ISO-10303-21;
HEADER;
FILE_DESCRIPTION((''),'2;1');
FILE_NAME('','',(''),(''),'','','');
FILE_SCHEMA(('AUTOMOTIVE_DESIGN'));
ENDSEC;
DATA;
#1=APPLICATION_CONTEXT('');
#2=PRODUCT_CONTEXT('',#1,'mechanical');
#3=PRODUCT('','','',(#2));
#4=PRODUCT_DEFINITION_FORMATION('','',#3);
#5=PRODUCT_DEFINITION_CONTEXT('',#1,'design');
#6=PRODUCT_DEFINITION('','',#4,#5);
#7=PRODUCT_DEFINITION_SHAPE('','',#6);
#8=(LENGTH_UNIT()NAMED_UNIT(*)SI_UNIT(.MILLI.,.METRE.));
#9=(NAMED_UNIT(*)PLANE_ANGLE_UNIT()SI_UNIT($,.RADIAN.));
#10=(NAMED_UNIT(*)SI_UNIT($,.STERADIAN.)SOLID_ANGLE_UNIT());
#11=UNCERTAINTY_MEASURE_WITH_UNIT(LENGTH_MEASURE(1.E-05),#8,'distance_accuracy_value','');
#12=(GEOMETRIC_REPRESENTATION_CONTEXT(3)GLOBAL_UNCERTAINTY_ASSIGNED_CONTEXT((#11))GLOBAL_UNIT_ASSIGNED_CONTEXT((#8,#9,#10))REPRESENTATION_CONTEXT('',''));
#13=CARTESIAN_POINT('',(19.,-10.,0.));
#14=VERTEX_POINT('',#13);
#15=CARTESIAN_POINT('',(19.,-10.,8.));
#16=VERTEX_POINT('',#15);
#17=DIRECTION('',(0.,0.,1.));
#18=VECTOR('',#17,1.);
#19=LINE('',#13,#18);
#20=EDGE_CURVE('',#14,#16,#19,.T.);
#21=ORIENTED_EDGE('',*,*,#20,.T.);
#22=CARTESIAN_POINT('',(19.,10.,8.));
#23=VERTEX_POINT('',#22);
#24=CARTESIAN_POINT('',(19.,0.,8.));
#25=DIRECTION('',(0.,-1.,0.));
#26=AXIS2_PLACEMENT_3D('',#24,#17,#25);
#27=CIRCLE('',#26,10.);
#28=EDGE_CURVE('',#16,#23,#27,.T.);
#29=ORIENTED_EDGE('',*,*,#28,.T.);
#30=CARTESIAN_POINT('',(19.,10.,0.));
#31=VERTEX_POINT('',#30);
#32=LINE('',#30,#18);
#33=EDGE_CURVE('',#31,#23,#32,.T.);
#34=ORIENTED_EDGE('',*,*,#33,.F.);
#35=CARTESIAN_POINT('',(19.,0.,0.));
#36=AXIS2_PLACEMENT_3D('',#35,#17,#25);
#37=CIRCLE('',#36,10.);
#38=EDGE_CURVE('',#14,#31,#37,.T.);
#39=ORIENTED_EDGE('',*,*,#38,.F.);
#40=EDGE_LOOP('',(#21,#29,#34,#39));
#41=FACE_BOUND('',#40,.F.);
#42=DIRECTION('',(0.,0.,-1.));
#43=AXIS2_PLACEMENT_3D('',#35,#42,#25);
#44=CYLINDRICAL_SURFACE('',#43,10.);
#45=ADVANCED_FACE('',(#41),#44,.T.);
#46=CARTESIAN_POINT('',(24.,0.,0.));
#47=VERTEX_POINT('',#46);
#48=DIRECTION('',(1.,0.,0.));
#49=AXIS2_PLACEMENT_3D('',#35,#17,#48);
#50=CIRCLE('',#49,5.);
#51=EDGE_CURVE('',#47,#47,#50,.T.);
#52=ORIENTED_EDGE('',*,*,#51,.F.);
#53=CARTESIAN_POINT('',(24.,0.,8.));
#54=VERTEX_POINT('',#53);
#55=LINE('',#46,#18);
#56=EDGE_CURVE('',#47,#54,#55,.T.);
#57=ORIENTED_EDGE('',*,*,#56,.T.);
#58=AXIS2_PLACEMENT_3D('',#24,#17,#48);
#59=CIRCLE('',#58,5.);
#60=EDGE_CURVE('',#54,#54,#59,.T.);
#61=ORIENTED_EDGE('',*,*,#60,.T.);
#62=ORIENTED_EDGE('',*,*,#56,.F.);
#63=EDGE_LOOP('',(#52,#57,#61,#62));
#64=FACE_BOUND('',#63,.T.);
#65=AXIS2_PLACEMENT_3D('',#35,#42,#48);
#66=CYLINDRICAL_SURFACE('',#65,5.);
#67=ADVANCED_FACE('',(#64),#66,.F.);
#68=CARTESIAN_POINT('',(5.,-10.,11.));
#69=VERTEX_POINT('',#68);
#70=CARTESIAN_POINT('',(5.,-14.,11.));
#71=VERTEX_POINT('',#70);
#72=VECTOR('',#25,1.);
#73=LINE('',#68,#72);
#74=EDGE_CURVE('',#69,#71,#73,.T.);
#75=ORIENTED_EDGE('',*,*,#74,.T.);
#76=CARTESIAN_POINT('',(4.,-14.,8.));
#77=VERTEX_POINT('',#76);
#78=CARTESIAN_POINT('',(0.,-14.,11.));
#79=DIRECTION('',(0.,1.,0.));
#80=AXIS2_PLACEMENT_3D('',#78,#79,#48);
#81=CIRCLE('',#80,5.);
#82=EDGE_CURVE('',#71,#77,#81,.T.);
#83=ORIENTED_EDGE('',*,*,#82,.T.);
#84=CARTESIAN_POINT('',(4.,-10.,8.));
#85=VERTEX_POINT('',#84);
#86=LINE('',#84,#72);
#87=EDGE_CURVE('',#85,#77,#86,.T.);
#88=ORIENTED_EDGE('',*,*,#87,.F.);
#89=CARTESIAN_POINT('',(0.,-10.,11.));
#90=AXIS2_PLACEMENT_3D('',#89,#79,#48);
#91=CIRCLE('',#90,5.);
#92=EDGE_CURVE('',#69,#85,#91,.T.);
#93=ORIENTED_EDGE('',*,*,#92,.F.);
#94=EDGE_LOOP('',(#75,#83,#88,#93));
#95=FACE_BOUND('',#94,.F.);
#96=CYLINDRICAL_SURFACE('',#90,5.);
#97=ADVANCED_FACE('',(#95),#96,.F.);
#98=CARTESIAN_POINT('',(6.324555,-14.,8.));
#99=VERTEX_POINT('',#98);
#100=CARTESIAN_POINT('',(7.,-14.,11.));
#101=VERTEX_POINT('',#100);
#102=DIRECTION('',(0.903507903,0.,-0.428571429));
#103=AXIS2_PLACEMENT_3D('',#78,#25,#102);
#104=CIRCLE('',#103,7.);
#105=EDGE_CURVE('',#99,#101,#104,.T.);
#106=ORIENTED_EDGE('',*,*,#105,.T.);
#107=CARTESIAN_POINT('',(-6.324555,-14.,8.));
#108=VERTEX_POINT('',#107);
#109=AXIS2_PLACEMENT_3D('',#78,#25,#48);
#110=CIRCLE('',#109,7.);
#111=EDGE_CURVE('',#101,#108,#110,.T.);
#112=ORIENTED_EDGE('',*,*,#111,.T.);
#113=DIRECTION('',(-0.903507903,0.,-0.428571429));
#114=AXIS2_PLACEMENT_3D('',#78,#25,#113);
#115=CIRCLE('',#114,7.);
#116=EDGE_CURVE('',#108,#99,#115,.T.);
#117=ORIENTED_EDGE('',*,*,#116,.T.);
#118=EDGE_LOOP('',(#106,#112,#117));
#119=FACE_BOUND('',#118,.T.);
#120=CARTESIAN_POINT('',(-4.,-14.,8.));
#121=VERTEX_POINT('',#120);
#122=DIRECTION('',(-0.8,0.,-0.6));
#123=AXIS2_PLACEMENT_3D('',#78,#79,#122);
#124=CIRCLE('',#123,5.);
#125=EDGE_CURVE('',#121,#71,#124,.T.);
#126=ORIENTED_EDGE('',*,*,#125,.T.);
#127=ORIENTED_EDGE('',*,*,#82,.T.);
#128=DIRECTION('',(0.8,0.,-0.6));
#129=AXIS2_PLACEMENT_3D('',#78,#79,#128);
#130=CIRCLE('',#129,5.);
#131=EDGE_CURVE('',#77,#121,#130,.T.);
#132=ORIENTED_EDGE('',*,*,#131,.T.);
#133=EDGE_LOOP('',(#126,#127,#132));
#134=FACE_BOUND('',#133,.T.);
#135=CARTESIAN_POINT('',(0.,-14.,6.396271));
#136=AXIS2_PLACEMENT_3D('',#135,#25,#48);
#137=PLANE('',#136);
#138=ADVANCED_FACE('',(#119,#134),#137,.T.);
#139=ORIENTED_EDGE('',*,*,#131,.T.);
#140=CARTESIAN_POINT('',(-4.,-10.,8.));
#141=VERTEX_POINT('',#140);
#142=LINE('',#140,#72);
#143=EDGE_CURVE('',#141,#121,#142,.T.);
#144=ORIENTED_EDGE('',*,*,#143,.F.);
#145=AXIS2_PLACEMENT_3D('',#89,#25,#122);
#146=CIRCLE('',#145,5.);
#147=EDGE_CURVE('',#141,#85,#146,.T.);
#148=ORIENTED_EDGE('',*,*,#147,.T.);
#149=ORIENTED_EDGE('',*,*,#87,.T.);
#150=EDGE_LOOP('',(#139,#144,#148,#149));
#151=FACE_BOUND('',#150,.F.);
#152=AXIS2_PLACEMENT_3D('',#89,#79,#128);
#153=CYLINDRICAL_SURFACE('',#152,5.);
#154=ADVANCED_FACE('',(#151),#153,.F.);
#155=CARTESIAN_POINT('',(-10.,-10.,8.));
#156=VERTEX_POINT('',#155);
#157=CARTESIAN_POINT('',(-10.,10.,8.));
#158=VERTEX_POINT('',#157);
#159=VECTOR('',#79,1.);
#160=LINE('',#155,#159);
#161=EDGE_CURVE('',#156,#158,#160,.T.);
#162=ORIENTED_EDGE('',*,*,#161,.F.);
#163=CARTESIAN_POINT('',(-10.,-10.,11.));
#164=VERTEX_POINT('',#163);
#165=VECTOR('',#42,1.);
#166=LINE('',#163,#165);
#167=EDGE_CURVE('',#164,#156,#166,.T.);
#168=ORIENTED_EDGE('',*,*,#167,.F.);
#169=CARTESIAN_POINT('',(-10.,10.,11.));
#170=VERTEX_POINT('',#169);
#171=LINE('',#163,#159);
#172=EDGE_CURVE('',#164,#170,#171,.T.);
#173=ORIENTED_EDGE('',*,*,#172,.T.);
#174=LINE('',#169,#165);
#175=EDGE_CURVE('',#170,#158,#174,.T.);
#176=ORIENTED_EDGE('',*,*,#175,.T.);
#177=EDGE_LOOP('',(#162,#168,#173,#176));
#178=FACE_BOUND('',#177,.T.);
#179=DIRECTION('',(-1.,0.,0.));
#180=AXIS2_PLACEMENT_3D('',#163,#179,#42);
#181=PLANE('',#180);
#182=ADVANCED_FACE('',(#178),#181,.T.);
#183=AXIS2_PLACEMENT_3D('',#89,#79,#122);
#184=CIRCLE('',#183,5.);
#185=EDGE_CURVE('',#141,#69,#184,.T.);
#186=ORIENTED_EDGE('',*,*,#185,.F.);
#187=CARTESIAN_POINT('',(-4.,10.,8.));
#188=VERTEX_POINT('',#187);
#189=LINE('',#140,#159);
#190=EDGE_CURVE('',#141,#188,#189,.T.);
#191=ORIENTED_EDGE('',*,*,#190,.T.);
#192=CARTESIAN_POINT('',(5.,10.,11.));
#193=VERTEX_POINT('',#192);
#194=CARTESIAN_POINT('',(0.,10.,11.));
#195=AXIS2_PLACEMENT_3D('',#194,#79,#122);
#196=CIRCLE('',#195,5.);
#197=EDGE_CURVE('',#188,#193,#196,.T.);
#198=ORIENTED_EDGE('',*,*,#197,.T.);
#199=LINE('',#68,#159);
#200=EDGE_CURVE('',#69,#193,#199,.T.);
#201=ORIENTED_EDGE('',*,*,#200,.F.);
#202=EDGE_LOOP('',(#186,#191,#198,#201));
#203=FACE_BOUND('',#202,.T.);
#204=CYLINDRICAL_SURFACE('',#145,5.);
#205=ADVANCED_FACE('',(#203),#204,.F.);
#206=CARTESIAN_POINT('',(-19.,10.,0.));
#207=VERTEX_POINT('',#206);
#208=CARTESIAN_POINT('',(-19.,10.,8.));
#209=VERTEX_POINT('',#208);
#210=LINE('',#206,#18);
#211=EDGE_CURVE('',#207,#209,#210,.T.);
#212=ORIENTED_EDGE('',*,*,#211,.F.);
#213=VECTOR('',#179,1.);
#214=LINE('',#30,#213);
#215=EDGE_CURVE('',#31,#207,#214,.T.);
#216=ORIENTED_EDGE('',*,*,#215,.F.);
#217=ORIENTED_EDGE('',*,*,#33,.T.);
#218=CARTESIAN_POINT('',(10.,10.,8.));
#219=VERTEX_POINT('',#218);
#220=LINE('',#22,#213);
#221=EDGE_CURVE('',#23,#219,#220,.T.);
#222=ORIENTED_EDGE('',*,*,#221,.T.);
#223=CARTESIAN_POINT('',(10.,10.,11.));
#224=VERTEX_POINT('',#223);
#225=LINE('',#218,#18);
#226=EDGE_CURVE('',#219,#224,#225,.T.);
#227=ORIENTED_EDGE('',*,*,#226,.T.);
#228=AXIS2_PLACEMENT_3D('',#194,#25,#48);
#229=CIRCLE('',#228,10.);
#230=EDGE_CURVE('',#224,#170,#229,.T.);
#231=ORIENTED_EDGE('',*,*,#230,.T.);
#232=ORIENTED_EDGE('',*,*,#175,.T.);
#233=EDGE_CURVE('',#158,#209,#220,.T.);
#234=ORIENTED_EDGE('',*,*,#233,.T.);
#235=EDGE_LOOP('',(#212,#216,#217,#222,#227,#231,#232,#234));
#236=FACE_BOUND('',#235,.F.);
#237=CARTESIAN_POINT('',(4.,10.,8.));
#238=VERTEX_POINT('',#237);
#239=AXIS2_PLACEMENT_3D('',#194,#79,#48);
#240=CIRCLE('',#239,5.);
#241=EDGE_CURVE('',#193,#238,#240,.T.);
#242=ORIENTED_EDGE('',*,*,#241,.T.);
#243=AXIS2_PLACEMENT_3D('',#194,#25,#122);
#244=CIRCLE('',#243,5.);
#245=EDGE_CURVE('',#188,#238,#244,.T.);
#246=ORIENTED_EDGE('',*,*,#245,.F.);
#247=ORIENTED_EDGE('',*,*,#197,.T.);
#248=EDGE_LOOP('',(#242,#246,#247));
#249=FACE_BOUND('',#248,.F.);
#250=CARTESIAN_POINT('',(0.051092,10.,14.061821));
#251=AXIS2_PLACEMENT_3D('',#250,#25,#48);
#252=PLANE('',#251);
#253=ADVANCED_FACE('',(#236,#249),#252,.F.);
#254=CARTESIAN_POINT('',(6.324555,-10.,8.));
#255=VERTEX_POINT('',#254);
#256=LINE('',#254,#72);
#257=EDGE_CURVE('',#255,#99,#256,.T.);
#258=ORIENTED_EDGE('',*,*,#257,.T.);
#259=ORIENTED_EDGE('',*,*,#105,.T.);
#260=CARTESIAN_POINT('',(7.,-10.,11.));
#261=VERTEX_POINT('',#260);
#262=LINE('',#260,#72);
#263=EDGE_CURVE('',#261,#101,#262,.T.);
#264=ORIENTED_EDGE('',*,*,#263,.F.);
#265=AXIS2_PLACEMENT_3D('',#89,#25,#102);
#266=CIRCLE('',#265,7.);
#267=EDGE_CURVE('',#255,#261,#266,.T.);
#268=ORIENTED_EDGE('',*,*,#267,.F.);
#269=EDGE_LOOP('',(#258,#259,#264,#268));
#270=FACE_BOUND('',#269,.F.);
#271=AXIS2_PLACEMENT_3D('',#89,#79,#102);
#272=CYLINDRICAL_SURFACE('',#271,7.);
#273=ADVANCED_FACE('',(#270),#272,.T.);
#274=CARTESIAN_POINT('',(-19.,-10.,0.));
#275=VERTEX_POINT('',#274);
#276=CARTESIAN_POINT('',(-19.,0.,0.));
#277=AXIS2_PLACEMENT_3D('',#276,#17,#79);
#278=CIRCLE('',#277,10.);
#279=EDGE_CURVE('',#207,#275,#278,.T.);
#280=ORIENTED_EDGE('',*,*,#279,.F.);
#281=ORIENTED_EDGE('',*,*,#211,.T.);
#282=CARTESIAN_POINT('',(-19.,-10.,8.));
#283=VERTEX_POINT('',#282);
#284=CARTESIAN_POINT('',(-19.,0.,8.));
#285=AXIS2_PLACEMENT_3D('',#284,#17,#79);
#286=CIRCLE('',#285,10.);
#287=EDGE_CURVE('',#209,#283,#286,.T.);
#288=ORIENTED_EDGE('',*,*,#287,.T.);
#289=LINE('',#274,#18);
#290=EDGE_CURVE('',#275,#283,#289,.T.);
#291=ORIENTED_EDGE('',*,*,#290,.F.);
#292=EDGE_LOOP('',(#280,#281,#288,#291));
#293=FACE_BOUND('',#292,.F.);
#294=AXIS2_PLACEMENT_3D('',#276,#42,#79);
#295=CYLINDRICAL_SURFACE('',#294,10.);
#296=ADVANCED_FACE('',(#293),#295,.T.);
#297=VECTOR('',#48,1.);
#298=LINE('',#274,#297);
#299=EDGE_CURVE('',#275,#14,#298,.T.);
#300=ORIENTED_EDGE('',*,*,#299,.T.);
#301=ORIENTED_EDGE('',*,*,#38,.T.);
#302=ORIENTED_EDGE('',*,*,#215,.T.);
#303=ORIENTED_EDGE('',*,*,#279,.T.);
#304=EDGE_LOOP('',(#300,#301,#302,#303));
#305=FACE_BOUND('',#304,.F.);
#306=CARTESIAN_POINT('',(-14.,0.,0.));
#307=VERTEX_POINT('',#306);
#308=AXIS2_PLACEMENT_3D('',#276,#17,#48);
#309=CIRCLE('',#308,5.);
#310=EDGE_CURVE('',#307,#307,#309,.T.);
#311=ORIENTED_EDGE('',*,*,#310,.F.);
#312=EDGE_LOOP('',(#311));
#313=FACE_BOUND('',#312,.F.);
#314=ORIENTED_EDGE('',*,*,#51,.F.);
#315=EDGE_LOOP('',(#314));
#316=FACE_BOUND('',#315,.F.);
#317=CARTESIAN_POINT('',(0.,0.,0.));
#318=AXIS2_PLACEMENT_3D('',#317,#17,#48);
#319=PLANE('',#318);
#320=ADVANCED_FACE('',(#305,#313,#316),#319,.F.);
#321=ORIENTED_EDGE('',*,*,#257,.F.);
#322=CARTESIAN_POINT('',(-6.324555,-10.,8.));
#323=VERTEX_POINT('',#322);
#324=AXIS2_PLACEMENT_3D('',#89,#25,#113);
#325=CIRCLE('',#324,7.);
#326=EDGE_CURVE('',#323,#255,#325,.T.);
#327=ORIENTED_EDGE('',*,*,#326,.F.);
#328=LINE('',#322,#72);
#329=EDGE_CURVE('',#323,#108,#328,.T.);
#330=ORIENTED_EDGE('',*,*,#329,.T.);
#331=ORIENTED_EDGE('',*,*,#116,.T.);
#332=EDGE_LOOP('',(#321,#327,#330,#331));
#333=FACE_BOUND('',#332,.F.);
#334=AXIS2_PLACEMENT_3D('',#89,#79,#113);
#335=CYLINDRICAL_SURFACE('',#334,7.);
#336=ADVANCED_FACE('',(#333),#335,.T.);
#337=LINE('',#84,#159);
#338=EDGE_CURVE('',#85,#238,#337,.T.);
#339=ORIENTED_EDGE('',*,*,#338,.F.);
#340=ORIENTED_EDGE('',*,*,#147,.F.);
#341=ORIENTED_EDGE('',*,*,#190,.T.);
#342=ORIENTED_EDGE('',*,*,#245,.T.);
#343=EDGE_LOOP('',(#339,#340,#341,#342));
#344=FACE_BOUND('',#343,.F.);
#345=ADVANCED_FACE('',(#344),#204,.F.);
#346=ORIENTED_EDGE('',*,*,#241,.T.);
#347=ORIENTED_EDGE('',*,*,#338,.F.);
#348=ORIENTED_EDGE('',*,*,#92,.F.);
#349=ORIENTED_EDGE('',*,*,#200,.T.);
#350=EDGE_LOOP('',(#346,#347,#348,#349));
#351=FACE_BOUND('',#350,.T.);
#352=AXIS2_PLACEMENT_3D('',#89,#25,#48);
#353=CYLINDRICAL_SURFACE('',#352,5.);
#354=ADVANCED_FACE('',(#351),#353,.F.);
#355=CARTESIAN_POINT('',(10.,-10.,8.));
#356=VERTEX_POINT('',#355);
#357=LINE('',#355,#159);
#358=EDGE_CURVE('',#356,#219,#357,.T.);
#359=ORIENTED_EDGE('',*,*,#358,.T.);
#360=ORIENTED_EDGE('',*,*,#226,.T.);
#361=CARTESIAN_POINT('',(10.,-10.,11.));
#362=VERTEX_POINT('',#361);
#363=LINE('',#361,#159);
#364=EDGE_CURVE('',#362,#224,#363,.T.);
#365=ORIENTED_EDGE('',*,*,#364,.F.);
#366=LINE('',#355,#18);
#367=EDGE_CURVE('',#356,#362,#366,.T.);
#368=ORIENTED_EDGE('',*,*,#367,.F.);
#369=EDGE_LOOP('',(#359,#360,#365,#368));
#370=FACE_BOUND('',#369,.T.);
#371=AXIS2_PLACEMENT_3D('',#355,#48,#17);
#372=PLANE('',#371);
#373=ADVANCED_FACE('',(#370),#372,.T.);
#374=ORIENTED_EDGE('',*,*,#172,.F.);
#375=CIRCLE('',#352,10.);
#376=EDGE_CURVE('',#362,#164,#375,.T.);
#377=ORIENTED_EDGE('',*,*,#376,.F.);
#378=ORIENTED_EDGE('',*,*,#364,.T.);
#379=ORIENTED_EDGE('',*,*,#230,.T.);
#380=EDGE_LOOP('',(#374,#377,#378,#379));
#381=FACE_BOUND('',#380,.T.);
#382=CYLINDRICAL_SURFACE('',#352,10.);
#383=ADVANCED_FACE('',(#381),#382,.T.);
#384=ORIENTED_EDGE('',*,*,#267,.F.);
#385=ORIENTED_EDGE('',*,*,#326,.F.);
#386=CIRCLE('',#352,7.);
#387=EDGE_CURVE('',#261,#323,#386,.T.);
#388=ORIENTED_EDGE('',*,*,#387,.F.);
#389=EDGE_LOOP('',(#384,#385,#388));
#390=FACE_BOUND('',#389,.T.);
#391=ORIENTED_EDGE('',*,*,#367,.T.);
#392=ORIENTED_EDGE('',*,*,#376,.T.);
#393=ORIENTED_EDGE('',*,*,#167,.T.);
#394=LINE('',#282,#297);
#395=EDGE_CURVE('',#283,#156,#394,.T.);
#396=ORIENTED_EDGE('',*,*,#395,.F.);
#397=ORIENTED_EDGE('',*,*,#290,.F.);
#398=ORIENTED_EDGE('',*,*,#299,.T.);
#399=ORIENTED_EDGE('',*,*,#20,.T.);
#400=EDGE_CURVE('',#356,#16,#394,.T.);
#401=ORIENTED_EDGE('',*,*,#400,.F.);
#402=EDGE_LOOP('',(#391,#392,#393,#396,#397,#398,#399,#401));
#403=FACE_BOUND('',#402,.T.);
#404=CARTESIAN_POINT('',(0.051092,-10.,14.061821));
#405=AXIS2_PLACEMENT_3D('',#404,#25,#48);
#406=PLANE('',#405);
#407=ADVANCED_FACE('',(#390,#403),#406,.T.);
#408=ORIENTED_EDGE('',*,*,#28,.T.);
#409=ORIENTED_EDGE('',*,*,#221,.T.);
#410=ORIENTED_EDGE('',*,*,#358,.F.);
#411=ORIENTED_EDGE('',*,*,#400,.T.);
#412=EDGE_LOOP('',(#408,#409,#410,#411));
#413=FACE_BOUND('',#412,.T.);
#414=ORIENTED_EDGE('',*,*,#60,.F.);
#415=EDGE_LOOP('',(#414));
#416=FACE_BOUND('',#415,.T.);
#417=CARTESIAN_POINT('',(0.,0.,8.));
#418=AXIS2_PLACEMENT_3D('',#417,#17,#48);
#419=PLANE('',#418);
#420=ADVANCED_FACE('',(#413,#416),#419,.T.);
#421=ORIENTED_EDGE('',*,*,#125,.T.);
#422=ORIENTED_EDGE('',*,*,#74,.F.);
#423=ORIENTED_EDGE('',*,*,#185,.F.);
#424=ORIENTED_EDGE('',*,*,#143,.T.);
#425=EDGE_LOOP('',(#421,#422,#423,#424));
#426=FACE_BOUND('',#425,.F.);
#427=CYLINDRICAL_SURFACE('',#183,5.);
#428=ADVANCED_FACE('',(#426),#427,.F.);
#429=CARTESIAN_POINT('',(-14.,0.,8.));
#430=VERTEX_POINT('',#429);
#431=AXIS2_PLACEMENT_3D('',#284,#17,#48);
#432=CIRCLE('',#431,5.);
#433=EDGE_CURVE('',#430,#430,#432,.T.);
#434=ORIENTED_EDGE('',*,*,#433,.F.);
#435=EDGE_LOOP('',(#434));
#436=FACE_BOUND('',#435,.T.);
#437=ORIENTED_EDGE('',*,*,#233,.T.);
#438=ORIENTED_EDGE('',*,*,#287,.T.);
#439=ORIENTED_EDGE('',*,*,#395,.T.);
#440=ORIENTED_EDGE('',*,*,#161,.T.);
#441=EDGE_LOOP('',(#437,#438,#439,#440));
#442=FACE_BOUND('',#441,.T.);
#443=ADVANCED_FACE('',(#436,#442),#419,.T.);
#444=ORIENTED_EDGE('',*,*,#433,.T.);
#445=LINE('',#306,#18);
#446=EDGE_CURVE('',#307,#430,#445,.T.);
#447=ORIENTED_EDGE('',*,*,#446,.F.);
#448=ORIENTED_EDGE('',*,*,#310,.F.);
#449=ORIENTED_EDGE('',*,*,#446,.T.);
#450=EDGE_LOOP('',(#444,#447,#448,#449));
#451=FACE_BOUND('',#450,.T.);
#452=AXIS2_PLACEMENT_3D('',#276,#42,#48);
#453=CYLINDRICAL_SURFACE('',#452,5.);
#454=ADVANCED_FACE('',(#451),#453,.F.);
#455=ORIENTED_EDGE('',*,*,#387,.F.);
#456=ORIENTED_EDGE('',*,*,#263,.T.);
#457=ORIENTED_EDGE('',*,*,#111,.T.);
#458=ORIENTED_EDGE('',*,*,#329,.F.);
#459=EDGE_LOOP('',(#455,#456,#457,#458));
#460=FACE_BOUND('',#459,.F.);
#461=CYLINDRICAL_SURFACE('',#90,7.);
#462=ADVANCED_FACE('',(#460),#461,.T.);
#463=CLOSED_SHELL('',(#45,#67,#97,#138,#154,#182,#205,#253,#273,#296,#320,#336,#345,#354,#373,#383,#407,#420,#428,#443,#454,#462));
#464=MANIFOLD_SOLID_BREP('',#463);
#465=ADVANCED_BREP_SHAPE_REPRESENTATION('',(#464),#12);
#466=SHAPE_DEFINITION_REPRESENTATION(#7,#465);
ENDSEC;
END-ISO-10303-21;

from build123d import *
from build123d import SkipClean  # not in build123d's __all__

# Parameters (mm, degrees)
F0_R     = 5
F1_DEPTH = 8
F3_DEPTH = 20
F4_DEPTH = 20.001
F5_DEPTH = 4


with BuildPart() as f1:
    # F0 (on Top) → F1 (new body)
    with BuildSketch(Plane.XY):
        with BuildLine():
            Line((-19, -10), (19, -10))
            ThreePointArc((19, -10), (29, 0), (19, 10))
            Line((19, 10), (-19, 10))
            ThreePointArc((-19, 10), (-29, 0), (-19, -10))
        make_face()
        with Locations((-19, 0)):
            Circle(F0_R, mode=Mode.SUBTRACT)
        with Locations((19, 0)):
            Circle(F0_R, mode=Mode.SUBTRACT)
    extrude(amount=F1_DEPTH)

    # F2 (on face) → F3 (join, through all)
    with BuildSketch(Plane.XZ.offset(10)):
        with BuildLine():
            Line((-10, 11), (-10, 8))
            Line((-10, 8), (-6.3245553203, 8))
            ThreePointArc((-6.3245553203, 8), (-1.5375488216, 17.8290514437), (7, 11))
            ThreePointArc((7, 11), (6.8290514437, 9.4624511784), (6.3245553203, 8))
            Line((6.3245553203, 8), (10, 8))
            Line((10, 8), (10, 11))
            ThreePointArc((10, 11), (0, 21), (-10, 11))
        make_face()
        with BuildLine():
            Line((-4, 8), (-6.3245553203, 8))
            ThreePointArc((-6.3245553203, 8), (0, 4), (6.3245553203, 8))
            Line((6.3245553203, 8), (4, 8))
            ThreePointArc((4, 8), (0, 6), (-4, 8))
        make_face()
        with BuildLine():
            ThreePointArc((7, 11), (-1.5375488216, 17.8290514437), (-6.3245553203, 8))
            Line((-6.3245553203, 8), (-4, 8))
            ThreePointArc((-4, 8), (-1.5811388301, 15.7434164903), (5, 11))
            ThreePointArc((5, 11), (4.7434164903, 9.4188611699), (4, 8))
            Line((4, 8), (6.3245553203, 8))
            ThreePointArc((6.3245553203, 8), (6.8290514437, 9.4624511784), (7, 11))
        make_face()
    extrude(amount=-F3_DEPTH)

    # F2 (on face) → F4 (cut, through all)
    with BuildSketch(Plane.XZ.offset(10)):
        with BuildLine():
            Line((4, 8), (-4, 8))
            ThreePointArc((-4, 8), (0, 6), (4, 8))
        make_face()
    with SkipClean():  # cleaning this boolean's faces spoils the solid; the shape is the same uncleaned
        extrude(amount=-F4_DEPTH, mode=Mode.SUBTRACT)

    # F2 (on face) → F5 (join)
    with BuildSketch(Plane.XZ.offset(10)):
        with BuildLine():
            Line((-4, 8), (-6.3245553203, 8))
            ThreePointArc((-6.3245553203, 8), (0, 4), (6.3245553203, 8))
            Line((6.3245553203, 8), (4, 8))
            ThreePointArc((4, 8), (0, 6), (-4, 8))
        make_face()
        with BuildLine():
            ThreePointArc((7, 11), (-1.5375488216, 17.8290514437), (-6.3245553203, 8))
            Line((-6.3245553203, 8), (-4, 8))
            ThreePointArc((-4, 8), (-1.5811388301, 15.7434164903), (5, 11))
            ThreePointArc((5, 11), (4.7434164903, 9.4188611699), (4, 8))
            Line((4, 8), (6.3245553203, 8))
            ThreePointArc((6.3245553203, 8), (6.8290514437, 9.4624511784), (7, 11))
        make_face()
    extrude(amount=F5_DEPTH)


solid = f1.part
